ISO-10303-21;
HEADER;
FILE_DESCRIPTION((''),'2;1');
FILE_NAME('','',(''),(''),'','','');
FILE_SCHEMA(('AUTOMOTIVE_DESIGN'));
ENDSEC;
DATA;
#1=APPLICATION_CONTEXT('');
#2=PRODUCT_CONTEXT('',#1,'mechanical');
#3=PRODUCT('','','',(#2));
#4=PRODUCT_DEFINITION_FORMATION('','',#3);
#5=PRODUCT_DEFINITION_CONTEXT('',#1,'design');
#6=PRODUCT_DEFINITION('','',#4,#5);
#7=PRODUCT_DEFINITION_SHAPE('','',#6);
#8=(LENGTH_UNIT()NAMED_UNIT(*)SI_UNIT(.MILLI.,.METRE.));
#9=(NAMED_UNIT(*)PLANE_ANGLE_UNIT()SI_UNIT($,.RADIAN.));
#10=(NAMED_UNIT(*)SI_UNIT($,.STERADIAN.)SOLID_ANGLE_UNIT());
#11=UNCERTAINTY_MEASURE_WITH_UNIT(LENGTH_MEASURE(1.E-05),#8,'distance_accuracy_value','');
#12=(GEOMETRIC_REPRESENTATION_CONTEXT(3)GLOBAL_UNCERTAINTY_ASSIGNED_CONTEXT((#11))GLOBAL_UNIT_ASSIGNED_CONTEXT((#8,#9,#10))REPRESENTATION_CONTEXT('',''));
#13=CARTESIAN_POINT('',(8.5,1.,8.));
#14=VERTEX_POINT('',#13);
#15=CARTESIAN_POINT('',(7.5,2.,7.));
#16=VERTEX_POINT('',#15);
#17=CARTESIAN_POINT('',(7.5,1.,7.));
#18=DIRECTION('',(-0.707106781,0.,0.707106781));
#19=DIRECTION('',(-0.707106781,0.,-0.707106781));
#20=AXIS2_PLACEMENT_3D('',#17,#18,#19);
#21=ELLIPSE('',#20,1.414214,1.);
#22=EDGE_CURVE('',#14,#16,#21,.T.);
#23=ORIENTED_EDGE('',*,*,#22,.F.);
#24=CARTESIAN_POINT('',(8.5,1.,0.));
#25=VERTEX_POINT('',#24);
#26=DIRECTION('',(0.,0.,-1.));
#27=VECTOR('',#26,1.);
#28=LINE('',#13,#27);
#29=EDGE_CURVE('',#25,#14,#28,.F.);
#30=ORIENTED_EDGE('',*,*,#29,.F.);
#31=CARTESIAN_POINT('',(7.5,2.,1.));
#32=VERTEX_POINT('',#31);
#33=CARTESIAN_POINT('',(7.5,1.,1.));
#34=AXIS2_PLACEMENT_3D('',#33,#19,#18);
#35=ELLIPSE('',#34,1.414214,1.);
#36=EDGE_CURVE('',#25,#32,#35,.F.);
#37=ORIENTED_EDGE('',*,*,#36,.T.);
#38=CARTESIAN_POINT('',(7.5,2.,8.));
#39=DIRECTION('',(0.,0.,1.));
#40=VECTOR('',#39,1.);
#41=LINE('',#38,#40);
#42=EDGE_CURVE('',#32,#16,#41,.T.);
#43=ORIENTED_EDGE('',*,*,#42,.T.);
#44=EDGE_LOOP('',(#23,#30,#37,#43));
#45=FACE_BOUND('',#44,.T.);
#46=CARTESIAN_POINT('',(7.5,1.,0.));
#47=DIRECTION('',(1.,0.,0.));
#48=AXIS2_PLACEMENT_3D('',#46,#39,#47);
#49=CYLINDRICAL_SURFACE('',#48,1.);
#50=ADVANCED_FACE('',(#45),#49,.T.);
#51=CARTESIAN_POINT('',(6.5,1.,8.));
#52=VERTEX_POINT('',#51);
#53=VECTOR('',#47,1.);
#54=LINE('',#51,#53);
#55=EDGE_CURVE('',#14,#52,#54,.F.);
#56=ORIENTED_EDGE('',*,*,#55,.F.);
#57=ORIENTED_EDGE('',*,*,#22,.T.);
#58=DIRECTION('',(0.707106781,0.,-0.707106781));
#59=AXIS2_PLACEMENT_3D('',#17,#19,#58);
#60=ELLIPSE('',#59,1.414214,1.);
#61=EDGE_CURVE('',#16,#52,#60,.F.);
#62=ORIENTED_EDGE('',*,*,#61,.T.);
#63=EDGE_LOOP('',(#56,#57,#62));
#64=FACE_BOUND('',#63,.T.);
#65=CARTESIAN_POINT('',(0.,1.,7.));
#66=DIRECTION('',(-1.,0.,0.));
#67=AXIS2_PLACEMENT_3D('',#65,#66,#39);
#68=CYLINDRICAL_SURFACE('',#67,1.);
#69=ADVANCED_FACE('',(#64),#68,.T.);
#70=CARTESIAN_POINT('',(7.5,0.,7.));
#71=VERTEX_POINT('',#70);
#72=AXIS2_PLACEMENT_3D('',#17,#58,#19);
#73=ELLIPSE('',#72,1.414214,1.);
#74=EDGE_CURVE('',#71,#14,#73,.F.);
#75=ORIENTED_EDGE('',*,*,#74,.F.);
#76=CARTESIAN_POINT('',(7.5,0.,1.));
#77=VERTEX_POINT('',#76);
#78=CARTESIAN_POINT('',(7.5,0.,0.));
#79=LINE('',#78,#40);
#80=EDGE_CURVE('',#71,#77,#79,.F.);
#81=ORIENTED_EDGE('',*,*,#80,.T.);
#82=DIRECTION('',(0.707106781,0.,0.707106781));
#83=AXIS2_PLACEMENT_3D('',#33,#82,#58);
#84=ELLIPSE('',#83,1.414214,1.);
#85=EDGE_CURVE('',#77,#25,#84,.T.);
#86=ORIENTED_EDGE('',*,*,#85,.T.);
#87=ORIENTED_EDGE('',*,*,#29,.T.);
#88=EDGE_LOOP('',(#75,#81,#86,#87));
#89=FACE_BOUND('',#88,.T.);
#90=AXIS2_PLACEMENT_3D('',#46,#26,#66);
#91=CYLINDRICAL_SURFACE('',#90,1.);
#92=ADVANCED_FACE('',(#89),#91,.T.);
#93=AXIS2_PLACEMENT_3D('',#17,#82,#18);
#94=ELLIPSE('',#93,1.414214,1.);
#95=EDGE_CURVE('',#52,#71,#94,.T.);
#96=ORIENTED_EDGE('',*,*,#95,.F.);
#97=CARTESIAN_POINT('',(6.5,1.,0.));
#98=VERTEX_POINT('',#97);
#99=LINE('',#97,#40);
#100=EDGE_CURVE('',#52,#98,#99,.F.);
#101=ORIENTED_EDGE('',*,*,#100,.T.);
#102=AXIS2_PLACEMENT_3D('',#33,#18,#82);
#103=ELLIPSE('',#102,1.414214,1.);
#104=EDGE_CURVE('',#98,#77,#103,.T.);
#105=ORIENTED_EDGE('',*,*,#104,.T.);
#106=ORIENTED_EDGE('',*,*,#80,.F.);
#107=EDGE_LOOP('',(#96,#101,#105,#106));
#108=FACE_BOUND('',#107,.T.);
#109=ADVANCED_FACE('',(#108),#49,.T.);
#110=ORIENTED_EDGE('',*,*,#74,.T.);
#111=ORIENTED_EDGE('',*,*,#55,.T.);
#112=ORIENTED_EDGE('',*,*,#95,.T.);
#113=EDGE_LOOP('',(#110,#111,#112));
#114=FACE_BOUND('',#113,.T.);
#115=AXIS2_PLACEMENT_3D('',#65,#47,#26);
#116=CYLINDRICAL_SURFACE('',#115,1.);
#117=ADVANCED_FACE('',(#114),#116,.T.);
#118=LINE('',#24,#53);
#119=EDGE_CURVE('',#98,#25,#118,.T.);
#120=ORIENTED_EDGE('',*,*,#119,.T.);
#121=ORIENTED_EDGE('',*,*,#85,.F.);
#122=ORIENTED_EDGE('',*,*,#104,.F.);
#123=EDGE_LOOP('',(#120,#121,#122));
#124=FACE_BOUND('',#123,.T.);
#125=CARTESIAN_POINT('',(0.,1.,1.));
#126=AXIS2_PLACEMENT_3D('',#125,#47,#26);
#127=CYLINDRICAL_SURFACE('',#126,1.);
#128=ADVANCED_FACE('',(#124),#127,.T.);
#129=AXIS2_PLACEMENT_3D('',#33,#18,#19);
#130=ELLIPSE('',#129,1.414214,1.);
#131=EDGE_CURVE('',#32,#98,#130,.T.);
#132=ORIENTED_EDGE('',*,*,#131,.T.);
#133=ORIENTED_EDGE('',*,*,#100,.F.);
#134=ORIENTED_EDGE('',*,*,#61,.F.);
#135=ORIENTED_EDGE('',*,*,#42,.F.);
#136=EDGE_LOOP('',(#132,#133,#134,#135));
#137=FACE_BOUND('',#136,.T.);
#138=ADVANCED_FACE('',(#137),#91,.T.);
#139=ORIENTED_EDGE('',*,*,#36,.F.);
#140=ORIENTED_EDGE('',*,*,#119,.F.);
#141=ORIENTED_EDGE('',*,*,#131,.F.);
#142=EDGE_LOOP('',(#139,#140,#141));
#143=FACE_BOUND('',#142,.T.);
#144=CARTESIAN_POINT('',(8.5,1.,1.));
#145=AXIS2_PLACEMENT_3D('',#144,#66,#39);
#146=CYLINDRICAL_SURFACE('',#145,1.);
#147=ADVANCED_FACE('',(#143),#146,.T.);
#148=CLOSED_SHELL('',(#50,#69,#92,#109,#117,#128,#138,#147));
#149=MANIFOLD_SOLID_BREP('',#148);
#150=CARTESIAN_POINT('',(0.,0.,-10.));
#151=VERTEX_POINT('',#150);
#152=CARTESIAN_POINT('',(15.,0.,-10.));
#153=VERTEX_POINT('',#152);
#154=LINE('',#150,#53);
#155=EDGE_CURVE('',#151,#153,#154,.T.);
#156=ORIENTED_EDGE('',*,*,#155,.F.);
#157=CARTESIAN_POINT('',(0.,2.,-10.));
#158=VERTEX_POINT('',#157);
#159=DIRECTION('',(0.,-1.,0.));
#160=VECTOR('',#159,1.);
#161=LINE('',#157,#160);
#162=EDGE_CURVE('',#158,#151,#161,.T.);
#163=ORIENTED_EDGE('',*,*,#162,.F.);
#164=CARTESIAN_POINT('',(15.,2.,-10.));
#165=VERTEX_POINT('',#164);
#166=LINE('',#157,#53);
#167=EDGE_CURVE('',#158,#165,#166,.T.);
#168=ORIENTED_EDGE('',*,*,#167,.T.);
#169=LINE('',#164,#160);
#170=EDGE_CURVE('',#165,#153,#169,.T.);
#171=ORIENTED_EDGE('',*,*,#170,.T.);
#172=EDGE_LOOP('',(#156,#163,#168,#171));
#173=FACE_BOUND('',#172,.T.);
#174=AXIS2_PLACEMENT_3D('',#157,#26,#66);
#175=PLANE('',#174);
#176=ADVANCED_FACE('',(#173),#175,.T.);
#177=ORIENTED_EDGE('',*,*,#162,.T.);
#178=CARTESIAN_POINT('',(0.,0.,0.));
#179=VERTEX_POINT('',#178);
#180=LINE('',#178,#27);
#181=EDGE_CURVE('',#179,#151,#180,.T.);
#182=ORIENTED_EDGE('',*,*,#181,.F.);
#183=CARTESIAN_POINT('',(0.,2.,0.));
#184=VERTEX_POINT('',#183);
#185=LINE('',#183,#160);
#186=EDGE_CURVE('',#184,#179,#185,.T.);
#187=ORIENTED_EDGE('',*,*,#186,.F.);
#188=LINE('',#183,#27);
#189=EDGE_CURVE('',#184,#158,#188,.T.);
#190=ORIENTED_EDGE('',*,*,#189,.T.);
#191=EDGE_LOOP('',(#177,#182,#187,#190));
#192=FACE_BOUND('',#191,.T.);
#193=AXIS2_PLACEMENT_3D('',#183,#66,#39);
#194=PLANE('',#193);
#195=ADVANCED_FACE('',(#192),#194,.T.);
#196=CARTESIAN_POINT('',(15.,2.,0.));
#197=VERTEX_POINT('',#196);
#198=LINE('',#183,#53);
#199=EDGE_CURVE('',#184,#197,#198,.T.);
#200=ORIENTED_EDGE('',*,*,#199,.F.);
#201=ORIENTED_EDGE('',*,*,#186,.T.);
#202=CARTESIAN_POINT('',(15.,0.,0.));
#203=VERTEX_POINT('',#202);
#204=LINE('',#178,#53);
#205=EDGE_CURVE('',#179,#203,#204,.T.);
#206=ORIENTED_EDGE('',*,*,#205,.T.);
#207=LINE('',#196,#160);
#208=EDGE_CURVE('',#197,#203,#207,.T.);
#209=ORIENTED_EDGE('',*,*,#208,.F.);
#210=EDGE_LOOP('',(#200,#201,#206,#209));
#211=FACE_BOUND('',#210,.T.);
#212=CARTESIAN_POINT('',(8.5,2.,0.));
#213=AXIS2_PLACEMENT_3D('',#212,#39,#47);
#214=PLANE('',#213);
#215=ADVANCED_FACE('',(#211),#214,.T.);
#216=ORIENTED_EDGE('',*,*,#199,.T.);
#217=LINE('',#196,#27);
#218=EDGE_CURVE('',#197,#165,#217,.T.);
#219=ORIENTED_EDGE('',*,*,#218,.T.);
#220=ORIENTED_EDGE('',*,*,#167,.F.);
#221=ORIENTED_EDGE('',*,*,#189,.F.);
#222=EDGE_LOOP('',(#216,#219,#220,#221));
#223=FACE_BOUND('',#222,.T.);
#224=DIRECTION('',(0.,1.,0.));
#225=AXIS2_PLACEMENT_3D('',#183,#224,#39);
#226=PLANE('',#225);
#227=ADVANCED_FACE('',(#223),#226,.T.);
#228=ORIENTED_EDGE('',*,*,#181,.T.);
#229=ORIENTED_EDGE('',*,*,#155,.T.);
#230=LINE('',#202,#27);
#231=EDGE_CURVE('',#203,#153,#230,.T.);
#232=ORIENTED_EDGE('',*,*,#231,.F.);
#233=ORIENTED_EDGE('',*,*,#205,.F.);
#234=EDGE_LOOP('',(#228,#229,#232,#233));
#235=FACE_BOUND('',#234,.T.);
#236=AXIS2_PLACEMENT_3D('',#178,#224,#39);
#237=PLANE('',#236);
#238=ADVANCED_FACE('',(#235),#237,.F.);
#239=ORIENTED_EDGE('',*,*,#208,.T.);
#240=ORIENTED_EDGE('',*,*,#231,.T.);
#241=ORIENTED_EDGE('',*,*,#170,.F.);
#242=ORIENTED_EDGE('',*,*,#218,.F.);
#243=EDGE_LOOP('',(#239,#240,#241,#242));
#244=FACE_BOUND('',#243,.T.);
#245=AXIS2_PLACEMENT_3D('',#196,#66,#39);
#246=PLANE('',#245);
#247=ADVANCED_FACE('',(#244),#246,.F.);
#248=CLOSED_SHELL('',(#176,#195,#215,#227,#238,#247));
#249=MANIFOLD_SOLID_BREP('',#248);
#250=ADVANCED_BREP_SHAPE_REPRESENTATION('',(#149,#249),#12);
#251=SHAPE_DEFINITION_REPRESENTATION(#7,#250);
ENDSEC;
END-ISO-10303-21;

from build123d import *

# Parameters (mm, degrees)
SKETCH1_W           = 15
SKETCH1_H           = 10
BOSS_EXTRUDE1_DEPTH = 2
SKETCH1_3_W         = 2
SKETCH1_3_H         = 8
BOSS_EXTRUDE2_DEPTH = 2
FILLET1_R           = 1


# Read off the part's stored shape, not the designer's step: Split1
with BuildPart() as part:
    # Sketch1 → Boss-Extrude1 (new body)
    with BuildSketch(Plane(origin=(0, 0, 0), x_dir=(1, 0, 0), z_dir=(0, 1, 0))):
        with Locations((7.5, 5)):
            Rectangle(SKETCH1_W, SKETCH1_H)
    extrude(amount=BOSS_EXTRUDE1_DEPTH)

    # Sketch1<3> → Boss-Extrude2 (add)
    with BuildSketch(Plane(origin=(0, 0, 0), x_dir=(1, 0, 0), z_dir=(0, 1, 0))):
        with Locations((7.5, -4)):
            Rectangle(SKETCH1_3_W, SKETCH1_3_H)
    extrude(amount=BOSS_EXTRUDE2_DEPTH)


with BuildPart() as body_2:
    # Split1: the piece on the far side of the plane
    add(part.part)
    split(bisect_by=Plane.XY, keep=Keep.BOTTOM)


with BuildPart() as part_1:
    add(part.part)

    # Split1
    split(bisect_by=Plane.XY, keep=Keep.TOP)

    # Fillet1
    fillet1_edges = [part_1.edges().sort_by_distance(p)[0] for p in [
        (7.5, 0, 8),
        (8.5, 0, 4),
        (6.5, 0, 4),
        (7.5, 2, 8),
        (8.5, 2, 4),
        (6.5, 2, 4),
        (7.5, 0, 0),
        (7.5, 2, 0),
    ]]
    fillet(fillet1_edges, radius=FILLET1_R - 0.0001)  # a hair under: the kernel refuses the full size


solid = Compound([body_2.part, part_1.part])
